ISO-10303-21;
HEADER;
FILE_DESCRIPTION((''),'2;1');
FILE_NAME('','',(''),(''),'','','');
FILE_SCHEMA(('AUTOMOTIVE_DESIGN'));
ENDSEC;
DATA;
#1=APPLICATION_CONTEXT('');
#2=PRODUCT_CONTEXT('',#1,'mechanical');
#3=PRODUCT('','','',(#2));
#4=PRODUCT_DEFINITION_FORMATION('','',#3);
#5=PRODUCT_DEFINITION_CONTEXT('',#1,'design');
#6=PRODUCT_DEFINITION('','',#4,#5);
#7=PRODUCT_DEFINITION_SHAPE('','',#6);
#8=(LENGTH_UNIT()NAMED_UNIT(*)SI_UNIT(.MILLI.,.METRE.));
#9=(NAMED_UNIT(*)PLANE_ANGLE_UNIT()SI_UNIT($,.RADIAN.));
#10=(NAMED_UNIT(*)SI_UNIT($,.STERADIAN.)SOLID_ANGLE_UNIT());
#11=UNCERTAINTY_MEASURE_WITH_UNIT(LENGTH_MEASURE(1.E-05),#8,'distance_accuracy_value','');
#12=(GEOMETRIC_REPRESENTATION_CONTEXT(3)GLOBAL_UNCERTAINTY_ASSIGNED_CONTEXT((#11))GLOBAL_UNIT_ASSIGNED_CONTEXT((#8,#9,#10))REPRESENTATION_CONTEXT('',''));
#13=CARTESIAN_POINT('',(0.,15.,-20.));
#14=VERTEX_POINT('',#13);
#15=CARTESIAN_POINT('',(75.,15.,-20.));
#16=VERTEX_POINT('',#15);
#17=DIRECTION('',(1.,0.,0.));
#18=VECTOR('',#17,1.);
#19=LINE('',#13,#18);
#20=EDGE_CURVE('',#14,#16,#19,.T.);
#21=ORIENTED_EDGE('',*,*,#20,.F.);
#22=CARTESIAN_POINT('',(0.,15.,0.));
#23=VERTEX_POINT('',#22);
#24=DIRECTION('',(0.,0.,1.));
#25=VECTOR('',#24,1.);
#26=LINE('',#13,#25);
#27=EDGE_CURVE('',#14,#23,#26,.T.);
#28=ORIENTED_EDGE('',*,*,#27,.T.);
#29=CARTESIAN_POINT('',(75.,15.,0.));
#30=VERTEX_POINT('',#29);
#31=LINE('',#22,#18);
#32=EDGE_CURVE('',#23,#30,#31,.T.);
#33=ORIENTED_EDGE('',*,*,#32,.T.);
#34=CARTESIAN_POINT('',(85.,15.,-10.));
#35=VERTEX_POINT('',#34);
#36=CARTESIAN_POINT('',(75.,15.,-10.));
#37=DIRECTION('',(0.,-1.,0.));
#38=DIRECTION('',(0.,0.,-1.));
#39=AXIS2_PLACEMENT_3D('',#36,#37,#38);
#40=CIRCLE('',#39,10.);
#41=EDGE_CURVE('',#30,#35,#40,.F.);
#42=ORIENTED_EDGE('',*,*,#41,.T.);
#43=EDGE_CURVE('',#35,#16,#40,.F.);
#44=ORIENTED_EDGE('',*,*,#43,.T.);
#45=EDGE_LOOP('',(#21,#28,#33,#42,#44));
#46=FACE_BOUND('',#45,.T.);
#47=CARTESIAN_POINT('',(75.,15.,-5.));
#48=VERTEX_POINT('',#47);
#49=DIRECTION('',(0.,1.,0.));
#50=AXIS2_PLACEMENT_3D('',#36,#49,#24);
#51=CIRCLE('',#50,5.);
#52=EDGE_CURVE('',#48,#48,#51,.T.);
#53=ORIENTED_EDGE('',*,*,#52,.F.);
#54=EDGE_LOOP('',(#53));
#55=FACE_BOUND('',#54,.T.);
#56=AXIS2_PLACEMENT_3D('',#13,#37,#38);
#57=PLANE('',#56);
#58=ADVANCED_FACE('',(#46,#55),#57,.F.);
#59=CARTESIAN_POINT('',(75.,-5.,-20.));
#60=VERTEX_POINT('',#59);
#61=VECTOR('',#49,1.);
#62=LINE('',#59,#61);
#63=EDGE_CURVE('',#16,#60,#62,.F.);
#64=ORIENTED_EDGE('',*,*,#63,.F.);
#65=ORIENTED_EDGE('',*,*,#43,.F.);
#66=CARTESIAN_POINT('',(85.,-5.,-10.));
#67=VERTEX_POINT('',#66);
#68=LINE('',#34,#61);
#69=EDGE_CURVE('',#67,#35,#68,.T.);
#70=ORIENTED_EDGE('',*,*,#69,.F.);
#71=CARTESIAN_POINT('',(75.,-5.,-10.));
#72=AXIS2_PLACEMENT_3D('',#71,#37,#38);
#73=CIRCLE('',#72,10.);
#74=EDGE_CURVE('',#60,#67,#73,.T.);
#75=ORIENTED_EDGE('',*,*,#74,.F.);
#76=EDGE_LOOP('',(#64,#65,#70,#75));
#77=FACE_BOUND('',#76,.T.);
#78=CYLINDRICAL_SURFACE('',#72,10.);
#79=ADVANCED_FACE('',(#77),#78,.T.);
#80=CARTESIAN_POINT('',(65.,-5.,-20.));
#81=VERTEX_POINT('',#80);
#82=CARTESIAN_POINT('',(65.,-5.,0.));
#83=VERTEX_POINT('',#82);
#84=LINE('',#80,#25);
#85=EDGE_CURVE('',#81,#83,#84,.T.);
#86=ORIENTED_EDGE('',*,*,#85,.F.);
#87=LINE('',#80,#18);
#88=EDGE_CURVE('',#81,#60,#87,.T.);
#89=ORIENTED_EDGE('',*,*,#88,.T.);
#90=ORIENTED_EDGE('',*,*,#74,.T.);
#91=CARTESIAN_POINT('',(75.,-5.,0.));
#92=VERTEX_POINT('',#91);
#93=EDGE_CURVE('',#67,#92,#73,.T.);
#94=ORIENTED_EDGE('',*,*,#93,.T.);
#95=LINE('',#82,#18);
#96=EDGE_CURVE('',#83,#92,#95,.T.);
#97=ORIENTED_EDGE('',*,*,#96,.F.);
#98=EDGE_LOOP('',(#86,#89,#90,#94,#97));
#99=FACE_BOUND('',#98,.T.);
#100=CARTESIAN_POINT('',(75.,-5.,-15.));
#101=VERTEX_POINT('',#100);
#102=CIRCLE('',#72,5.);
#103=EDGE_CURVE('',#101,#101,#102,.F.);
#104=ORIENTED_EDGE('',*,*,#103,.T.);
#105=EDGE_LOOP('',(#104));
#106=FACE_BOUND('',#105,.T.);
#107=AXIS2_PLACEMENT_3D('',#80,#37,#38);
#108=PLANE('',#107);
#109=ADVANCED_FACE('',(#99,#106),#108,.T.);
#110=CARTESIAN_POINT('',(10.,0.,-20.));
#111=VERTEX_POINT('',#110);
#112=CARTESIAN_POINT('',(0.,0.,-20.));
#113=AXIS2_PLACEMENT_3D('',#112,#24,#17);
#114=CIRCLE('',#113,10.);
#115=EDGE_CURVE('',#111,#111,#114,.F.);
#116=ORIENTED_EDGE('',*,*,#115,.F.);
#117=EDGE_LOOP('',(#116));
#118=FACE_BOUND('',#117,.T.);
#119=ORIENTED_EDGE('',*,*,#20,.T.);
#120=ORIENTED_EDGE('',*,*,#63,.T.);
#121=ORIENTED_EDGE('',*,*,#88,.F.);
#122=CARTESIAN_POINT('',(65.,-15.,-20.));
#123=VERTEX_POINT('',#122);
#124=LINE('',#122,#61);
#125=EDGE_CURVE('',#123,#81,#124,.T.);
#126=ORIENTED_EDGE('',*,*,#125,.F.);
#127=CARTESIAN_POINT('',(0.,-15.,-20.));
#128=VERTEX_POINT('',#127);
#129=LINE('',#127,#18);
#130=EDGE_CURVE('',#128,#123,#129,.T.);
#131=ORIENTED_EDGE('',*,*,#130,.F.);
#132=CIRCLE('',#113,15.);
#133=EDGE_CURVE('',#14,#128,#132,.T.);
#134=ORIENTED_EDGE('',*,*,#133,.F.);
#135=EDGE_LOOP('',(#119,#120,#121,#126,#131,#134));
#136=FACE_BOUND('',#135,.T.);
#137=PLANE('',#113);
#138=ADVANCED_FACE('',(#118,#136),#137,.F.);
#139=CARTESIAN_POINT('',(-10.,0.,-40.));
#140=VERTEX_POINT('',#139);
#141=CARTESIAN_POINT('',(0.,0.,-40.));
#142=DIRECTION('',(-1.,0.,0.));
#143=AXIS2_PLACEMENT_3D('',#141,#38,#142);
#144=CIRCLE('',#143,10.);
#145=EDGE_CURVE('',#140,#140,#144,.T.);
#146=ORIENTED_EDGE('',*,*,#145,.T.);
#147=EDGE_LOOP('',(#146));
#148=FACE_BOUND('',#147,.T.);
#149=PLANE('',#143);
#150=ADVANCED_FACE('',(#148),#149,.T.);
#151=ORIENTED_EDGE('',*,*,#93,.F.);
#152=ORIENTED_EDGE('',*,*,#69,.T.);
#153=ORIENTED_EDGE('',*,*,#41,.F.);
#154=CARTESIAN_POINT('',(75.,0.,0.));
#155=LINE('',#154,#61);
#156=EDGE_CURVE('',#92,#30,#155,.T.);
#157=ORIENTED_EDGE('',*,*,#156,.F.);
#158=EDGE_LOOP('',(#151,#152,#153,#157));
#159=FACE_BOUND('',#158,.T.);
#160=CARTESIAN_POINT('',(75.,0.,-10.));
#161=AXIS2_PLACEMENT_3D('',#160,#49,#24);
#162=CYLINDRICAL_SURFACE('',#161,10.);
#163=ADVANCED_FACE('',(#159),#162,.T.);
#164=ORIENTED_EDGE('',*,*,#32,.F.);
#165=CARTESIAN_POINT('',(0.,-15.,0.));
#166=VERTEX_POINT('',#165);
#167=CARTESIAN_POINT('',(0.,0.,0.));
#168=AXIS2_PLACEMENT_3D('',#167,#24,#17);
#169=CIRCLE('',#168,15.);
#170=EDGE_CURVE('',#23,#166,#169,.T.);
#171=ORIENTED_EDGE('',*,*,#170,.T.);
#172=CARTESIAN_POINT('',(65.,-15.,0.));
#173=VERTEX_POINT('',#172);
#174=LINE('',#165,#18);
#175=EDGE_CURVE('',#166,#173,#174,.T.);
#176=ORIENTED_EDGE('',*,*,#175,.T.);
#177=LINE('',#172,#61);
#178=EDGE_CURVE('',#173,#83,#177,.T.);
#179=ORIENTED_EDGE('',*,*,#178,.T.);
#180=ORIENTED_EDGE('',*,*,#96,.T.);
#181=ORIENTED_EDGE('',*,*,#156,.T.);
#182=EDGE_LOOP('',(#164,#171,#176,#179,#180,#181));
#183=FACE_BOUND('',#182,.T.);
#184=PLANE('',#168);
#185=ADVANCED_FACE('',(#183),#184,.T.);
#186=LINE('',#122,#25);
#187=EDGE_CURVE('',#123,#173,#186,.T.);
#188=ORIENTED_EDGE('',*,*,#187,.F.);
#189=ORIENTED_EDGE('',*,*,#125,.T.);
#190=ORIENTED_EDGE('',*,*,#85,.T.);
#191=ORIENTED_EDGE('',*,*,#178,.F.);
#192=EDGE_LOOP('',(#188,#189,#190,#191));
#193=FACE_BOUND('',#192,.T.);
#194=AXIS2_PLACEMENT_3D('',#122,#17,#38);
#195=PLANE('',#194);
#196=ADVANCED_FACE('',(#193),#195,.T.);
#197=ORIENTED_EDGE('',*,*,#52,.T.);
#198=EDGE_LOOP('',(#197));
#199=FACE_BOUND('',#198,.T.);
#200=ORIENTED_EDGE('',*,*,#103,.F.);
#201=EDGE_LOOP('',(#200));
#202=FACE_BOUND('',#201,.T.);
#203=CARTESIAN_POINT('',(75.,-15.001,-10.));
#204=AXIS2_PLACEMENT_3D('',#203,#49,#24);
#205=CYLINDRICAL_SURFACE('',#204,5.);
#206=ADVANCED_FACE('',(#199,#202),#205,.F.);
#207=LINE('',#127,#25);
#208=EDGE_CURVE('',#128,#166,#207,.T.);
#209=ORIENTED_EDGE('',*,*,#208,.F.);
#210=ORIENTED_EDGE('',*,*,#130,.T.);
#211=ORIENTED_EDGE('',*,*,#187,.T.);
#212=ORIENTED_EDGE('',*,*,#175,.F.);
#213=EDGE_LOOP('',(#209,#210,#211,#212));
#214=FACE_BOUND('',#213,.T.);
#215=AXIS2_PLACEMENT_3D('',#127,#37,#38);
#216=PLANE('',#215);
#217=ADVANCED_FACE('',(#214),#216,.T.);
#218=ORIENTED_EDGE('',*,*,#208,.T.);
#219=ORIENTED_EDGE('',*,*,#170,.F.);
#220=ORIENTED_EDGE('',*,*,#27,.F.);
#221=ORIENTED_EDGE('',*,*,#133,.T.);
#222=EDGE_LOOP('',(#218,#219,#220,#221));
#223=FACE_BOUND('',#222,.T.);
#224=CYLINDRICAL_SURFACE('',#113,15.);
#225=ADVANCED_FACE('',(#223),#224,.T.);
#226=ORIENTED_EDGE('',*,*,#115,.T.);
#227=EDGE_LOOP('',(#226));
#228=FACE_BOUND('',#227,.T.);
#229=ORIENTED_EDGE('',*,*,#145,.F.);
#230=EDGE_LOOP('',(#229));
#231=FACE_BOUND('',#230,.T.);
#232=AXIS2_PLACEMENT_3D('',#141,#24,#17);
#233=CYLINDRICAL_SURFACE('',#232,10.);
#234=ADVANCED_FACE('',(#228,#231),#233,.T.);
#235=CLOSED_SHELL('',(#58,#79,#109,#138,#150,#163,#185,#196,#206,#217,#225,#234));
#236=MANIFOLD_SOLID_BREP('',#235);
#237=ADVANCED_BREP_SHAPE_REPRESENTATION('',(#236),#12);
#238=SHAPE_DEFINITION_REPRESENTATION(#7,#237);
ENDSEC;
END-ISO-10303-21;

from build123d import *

# Parameters (mm, degrees)
BOSS_EXTRUDE1_DEPTH = 20
FILLET1_R           = 10
CUT_EXTRUDE1_REACH  = 94.331
SKETCH4_R           = 5
SKETCH5_R           = 10
BOSS_EXTRUDE2_DEPTH = 20


with BuildPart() as part:
    # Sketch1 → Boss-Extrude1 (new body)
    with BuildSketch(Plane.XY):
        with BuildLine():
            Line((0, 15), (85, 15))
            Line((85, 15), (85, -5))
            Line((85, -5), (65, -5))
            Line((65, -5), (65, -15))
            Line((65, -15), (0, -15))
            ThreePointArc((0, -15), (-15, 0), (0, 15))
        make_face()
    extrude(amount=-BOSS_EXTRUDE1_DEPTH)

    # Fillet1
    fillet1_edges = [part.edges().sort_by_distance(p)[0] for p in [
        (85, 5, 0),
        (85, 5, -20),
    ]]
    fillet(fillet1_edges, radius=FILLET1_R - 0.0001)  # a hair under: the kernel refuses the full size

    # Sketch4 → Cut-Extrude1 (cut, up to next)
    with BuildSketch(Plane(origin=(0, 15, 0), x_dir=(1, 0, 0), z_dir=(0, 1, 0)), mode=Mode.PRIVATE) as cut_extrude1_sk1:
        with Locations(Location((75, 10, 0), (0, 0, 270))):
            Circle(SKETCH4_R)
    cut_extrude1_tool1 = extrude(cut_extrude1_sk1.sketch, amount=-CUT_EXTRUDE1_REACH, mode=Mode.PRIVATE) & part.part
    add(cut_extrude1_tool1.solids().sort_by_distance((75, 15, -10))[0], mode=Mode.SUBTRACT)

    # Sketch5 → Boss-Extrude2 (add)
    with BuildSketch(Plane(origin=(0, 0, -20), x_dir=(-1, 0, 0), z_dir=(0, 0, -1))):
        with Locations(Location((0, 0, 0), (0, 0, 180))):
            Circle(SKETCH5_R)
    extrude(amount=BOSS_EXTRUDE2_DEPTH)


solid = part.part
